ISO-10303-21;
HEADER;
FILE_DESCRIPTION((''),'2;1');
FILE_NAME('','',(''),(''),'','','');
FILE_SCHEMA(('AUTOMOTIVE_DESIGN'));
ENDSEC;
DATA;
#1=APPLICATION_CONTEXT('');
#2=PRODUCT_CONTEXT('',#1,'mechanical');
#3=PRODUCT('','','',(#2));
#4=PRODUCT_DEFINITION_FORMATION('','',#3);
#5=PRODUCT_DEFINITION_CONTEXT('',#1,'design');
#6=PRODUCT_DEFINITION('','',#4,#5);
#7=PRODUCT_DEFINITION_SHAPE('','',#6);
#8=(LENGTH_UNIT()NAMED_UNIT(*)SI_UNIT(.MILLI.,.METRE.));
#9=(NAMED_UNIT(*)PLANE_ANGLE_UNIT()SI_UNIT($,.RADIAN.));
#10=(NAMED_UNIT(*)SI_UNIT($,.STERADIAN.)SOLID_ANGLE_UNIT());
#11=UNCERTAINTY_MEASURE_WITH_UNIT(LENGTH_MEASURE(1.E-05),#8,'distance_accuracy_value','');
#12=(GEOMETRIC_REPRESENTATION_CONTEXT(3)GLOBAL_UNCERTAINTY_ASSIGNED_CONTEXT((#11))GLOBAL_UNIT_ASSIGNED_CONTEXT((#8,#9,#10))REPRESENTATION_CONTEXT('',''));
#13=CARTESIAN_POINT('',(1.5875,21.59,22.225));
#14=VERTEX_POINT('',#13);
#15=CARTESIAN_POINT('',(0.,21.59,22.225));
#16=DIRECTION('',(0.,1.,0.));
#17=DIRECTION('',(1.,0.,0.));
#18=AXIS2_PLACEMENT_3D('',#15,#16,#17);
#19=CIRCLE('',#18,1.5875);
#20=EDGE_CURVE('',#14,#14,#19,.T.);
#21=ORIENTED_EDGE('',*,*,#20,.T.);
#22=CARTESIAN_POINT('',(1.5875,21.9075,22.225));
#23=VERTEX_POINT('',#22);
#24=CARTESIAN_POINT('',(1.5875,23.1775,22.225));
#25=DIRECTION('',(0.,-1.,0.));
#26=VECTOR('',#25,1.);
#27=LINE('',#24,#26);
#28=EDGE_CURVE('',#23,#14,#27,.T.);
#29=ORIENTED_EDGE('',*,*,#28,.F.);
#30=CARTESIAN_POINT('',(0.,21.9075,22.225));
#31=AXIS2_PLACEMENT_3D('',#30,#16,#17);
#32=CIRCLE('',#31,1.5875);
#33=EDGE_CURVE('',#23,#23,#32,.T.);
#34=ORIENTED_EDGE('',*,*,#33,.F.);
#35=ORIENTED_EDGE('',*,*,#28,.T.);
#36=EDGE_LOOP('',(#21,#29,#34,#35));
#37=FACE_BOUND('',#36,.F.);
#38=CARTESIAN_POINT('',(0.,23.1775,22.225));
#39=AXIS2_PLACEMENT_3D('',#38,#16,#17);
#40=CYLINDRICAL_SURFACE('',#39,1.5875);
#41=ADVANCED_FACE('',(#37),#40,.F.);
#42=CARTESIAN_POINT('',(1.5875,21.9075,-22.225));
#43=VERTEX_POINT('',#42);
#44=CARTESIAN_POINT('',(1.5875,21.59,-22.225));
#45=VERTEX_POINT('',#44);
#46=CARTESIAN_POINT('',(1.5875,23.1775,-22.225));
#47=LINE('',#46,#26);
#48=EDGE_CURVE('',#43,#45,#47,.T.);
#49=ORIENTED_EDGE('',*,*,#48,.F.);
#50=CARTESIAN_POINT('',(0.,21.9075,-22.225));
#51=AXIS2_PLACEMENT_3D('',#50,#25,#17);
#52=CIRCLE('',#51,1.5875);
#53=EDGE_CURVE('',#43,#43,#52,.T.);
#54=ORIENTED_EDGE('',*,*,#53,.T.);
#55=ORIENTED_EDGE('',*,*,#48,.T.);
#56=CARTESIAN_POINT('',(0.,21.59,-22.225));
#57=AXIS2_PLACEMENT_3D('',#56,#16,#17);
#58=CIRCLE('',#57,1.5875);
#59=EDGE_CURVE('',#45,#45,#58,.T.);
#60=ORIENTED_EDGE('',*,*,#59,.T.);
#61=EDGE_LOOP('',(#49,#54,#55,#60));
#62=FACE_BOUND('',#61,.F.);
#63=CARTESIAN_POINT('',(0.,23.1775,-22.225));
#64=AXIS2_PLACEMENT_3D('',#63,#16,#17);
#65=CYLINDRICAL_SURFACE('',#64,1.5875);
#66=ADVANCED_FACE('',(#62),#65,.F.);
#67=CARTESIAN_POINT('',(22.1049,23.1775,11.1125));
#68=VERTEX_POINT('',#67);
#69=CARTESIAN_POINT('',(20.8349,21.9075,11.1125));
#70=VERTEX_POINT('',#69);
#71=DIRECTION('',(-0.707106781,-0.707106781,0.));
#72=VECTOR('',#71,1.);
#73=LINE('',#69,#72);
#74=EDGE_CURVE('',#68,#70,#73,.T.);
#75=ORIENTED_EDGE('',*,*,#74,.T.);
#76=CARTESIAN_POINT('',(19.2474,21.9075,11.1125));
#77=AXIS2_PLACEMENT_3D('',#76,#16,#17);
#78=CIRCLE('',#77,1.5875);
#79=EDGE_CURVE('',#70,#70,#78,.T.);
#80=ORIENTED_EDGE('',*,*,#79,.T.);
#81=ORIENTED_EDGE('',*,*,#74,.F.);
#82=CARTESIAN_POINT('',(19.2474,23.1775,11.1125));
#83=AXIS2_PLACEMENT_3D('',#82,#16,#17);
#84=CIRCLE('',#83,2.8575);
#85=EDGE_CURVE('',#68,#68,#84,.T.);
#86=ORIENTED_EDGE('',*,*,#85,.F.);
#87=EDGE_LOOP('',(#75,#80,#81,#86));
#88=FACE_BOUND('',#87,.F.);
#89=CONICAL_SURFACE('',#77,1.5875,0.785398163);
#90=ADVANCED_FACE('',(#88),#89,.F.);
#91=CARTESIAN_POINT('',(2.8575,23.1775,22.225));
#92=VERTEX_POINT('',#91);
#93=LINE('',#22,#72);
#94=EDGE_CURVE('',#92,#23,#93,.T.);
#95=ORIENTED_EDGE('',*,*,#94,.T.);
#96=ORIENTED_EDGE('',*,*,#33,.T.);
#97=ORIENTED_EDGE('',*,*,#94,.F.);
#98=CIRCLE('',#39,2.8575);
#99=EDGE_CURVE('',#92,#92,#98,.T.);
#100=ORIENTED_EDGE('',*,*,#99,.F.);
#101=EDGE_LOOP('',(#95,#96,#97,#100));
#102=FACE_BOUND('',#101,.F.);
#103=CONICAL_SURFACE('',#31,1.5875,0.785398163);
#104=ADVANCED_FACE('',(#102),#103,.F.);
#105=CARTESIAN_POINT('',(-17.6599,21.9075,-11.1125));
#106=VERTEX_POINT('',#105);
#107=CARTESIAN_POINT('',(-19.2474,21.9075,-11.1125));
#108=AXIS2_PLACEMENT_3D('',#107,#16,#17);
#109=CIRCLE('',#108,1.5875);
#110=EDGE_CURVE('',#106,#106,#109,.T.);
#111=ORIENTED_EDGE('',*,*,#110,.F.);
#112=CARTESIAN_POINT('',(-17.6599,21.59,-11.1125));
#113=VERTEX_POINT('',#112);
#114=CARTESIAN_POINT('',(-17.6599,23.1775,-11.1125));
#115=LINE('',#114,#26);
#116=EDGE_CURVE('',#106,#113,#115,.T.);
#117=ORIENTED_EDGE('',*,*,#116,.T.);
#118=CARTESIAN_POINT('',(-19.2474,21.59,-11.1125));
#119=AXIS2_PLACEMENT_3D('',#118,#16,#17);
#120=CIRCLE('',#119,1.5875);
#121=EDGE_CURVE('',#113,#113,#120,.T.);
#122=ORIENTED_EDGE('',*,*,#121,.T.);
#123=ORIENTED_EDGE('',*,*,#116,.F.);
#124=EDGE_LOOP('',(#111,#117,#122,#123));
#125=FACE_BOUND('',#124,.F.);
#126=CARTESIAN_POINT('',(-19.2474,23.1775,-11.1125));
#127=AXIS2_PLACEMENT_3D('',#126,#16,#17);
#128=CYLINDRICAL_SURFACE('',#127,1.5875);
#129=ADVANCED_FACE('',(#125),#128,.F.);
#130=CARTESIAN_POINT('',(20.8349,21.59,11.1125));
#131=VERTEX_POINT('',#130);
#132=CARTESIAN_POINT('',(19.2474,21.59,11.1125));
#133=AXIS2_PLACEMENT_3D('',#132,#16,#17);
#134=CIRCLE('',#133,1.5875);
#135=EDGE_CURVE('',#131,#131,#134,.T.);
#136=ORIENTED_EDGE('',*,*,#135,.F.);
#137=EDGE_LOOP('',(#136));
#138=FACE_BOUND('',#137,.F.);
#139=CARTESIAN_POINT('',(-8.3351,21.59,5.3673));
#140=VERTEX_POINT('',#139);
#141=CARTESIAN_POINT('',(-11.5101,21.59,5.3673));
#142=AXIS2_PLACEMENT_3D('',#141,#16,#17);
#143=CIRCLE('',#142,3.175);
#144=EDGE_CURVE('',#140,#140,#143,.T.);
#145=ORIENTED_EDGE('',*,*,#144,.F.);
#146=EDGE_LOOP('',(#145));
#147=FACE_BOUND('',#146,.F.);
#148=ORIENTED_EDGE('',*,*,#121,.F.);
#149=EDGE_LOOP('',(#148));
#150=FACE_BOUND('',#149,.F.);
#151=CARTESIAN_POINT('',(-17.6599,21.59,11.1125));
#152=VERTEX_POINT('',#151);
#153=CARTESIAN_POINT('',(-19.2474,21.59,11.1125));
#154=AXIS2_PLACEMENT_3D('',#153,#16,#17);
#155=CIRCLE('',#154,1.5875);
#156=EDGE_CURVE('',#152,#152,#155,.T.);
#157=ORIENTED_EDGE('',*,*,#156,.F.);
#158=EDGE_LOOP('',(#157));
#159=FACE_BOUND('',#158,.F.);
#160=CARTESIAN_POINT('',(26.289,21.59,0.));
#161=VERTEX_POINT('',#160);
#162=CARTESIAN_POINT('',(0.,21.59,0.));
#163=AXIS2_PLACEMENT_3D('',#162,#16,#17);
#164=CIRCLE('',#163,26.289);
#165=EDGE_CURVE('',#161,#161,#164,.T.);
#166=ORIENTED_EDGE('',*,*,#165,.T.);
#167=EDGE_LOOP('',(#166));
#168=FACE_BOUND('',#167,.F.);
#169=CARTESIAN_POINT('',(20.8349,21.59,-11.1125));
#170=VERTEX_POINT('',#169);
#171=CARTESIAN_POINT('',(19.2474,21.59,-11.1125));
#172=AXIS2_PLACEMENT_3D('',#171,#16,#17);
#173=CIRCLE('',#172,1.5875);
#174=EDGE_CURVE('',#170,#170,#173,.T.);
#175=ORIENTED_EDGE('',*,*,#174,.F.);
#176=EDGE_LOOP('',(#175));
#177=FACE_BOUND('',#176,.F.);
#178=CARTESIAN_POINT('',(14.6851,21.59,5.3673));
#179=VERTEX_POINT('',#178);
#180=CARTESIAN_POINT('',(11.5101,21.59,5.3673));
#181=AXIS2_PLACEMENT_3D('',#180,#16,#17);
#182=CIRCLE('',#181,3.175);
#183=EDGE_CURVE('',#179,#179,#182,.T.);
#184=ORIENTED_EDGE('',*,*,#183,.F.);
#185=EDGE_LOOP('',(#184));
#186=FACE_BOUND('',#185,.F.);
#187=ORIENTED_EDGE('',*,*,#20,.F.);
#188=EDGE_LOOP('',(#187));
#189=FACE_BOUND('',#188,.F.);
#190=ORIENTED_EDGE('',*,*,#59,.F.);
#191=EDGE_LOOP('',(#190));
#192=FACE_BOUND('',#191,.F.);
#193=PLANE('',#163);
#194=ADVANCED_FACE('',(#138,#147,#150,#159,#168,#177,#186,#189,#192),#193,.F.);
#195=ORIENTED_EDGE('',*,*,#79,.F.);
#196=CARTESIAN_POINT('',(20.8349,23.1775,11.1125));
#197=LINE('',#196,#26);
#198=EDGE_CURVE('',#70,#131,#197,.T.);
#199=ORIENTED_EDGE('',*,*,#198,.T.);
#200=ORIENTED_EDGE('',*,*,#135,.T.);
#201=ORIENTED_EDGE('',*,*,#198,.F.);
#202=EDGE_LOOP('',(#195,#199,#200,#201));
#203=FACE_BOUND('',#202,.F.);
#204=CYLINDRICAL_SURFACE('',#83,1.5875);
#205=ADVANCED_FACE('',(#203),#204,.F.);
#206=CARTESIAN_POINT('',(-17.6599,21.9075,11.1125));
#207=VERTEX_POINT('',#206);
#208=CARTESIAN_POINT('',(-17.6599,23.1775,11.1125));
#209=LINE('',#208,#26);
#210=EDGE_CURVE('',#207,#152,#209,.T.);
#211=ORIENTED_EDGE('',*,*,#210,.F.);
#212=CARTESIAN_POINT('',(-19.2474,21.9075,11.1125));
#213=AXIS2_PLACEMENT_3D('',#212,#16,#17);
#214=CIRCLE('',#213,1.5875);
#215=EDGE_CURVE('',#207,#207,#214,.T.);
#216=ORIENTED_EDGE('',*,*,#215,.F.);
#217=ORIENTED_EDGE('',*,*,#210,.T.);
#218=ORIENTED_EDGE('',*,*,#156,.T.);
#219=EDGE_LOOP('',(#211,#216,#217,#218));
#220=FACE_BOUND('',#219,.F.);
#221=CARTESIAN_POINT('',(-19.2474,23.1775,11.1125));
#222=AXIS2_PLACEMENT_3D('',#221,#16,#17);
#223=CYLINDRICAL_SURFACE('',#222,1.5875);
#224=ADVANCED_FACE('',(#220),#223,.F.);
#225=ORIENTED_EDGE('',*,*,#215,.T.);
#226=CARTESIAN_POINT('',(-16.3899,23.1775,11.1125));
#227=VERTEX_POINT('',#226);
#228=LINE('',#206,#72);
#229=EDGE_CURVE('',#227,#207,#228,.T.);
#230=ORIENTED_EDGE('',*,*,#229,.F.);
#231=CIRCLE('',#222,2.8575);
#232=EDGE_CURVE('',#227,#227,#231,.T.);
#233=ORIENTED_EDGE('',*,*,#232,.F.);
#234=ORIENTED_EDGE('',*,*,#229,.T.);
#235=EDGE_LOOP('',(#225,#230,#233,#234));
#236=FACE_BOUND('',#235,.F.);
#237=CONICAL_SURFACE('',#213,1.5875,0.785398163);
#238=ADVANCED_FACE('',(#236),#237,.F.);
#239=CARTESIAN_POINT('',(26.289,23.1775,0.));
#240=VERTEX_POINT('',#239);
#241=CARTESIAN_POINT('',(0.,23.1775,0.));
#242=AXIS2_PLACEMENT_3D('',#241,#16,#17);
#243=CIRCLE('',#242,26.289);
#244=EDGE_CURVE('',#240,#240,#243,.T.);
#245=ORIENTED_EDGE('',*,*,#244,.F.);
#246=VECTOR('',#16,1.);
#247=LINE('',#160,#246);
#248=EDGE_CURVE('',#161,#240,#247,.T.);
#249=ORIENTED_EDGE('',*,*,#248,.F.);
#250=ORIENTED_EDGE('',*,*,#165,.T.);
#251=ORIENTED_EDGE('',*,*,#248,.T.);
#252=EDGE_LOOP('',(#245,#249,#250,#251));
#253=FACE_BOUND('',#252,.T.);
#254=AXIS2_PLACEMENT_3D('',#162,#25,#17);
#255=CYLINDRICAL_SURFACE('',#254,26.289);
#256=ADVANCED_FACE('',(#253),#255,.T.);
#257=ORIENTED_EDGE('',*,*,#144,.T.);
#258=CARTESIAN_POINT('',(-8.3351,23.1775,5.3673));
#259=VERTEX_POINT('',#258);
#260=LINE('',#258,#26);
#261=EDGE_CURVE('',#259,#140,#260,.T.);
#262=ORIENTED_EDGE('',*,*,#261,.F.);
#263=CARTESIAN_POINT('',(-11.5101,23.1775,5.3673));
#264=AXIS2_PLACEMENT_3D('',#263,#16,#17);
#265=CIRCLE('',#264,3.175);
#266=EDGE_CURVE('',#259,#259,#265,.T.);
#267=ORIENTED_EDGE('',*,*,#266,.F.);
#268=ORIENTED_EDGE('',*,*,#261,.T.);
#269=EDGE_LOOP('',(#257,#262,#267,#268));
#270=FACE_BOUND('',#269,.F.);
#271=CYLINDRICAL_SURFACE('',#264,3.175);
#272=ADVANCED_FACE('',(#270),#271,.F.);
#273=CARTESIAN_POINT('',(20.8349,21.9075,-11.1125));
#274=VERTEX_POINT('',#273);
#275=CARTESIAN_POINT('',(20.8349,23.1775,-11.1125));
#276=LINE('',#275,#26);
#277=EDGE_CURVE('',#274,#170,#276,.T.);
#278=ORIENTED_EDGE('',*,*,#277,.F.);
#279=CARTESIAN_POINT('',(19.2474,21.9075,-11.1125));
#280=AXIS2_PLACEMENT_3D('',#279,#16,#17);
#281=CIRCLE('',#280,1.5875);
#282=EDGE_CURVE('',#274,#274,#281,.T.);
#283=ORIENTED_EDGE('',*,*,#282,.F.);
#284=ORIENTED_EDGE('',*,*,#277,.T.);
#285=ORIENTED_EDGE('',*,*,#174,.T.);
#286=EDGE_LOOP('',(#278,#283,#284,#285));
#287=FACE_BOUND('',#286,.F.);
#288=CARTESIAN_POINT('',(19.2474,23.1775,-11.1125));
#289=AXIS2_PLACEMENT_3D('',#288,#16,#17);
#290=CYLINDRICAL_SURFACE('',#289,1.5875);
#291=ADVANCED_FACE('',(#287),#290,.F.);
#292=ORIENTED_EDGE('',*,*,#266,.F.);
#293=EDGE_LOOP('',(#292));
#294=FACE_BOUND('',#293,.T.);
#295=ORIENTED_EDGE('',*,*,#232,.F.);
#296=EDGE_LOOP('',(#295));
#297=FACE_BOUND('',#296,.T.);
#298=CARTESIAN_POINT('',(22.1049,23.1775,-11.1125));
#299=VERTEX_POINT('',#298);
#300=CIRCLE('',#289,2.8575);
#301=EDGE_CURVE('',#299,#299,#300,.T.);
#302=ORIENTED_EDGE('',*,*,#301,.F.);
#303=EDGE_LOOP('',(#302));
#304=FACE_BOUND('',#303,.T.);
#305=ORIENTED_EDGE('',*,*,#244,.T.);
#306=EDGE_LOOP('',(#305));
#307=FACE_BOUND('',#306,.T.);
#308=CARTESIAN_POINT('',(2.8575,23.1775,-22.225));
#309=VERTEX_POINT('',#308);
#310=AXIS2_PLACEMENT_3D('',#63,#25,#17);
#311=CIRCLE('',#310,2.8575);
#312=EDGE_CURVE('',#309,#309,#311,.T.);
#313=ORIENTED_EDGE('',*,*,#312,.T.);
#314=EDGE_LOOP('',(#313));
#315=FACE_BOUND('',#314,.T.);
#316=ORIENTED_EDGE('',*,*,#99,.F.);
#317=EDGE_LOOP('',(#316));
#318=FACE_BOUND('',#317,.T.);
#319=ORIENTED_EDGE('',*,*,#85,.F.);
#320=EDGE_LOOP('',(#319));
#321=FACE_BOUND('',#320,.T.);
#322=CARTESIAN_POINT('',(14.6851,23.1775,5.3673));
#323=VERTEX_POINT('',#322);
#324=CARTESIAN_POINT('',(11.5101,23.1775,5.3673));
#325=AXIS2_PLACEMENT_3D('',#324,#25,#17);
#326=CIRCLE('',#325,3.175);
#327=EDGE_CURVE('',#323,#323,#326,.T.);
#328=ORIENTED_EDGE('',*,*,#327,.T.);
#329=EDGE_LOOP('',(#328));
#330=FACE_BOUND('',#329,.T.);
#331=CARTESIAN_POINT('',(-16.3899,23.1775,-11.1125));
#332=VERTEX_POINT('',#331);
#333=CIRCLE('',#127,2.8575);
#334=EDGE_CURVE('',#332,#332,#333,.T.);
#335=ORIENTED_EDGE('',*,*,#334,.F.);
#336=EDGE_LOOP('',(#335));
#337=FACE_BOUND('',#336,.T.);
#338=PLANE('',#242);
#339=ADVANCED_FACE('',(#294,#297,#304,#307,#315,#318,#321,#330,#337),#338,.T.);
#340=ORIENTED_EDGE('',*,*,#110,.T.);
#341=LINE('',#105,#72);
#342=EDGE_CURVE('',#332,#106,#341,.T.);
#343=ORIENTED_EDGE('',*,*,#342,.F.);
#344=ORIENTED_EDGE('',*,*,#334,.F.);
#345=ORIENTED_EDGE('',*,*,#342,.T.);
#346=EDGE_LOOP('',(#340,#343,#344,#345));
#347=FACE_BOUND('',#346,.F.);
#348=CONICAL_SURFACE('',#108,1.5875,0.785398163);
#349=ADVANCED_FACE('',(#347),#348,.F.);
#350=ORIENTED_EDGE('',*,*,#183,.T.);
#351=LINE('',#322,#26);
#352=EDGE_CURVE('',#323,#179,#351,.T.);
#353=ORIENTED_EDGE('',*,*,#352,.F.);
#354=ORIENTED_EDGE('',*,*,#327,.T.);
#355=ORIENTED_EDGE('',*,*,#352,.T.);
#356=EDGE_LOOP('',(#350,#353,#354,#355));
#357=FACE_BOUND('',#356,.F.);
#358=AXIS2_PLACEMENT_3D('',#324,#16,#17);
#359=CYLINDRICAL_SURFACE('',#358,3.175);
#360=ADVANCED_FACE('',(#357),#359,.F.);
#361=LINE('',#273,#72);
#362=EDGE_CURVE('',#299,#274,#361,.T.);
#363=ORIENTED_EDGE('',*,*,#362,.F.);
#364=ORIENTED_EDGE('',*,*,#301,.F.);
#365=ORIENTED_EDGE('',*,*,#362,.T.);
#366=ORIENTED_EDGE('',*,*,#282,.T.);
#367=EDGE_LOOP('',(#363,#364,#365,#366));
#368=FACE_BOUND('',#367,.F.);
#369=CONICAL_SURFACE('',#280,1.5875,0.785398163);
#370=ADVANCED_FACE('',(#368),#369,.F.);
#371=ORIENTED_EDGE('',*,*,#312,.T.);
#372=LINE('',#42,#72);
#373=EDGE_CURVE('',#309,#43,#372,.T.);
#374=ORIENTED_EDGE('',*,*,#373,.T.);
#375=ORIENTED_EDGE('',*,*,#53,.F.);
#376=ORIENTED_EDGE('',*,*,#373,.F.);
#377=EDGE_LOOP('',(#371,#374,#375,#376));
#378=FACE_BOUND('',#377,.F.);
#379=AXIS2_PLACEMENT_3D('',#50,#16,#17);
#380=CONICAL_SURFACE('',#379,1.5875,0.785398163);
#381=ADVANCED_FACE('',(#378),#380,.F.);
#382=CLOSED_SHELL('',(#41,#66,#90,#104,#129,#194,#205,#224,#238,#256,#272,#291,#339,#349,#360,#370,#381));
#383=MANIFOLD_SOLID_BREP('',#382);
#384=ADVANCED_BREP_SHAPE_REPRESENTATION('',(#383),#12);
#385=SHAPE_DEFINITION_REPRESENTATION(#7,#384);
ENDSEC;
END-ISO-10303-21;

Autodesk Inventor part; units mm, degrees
ref_plane "YZ Plane" through (0, 0, 0) normal (1, 0, 0) x (0, 1, 0)
ref_plane "XZ Plane" through (0, 0, 0) normal (0, 1, 0) x (-1, 0, 0)
sketch "Sketch6" plane through (0, 0, 0) normal (0, 0, 1) x (1, 0, 0)
  line L0 (540.6478, 1219.1491) -> (540.6478, -58.7076) construction
  line L1 (540.6478, -58.7076) -> (-407.4394, -58.7076) construction
  line L2 (-407.4394, -58.7076) -> (-407.4394, 1219.1491) construction
  line L3 (-407.4394, 1219.1491) -> (540.6478, 1219.1491) construction
  point P0 (0, 0)
sketch "Sketch5" plane through (0, 0, 0) normal (0, 0, 1) x (1, 0, 0)
  line L0 (0, 0) -> (0, 142.24)
  line L1 (0, 142.24) -> (50.8, 142.24)
  line L2 (50.8, 142.24) -> (-50.8, 142.24)
  line L3 (50.8, 142.24) -> (45.2986, 0) construction
  line L4 (45.2986, 0) -> (0, 0) construction
  spline S0 degree 2 poles (50.8, 142.24) (45.2986, 0) (0, 0) knots 1 1 1 2 2 2
  line L5 (-50.8, 142.24) -> (-45.2986, 0) construction
  line L6 (-45.2986, 0) -> (0, 0) construction
  spline S1 degree 2 poles (-50.8, 142.24) (-45.2986, 0) (0, 0) knots 1 1 1 2 2 2
  dimension "d20" = 142.24
  dimension "d21" = 50.8
  dimension "d22" = 101.6
revolve "Revolution1" add sketch "Sketch5" angle 360 about axis through (0, 0, 0) along (0, 1, 0) contours L0 L1 S0
ref_plane "Work Plane1" through (0, 21.59, 0) normal (0, 1, 0) x (1, 0, 0)
sketch "Sketch9" plane through (0, 21.59, 0) normal (0, 1, 0) x (1, 0, 0)
  line L0 (-101.4531, 67.0538) -> (104.6936, 67.0538)
  line L1 (104.6936, 67.0538) -> (104.6936, -70.5436)
  line L2 (104.6936, -70.5436) -> (-101.4531, -70.5436)
  line L3 (-101.4531, -70.5436) -> (-101.4531, 67.0538)
  point P0 (0, 0)
extrude "Extrusion2" cut sketch "Sketch9" along normal through all
sketch "Sketch10" plane through (0, 21.59, 0) normal (0, 1, 0) x (1, 0, 0)
  circle A0 centre (0, 0) radius 29.2557
  circle A1 centre (0, 0) radius 26.289
  dimension "d75" = 58.5114
  dimension "d76" = 52.578
extrude "Extrusion3" add sketch "Sketch10" along normal blind 1.5875 contours A1
extrude "Extrusion4" cut sketch "Sketch10" against normal through all contours A0 | A1
sketch "Sketch11" plane through (0, 23.1775, 0) normal (0, 1, 0) x (1, 0, 0)
  line L0 (0, 0) -> (0, 22.225)
  circle A0 centre (0, 22.225) radius 1.5875
  circle A1 centre (-19.2474, 11.1125) radius 1.5875
  circle A2 centre (-19.2474, -11.1125) radius 1.5875
  circle A3 centre (0, -22.225) radius 1.5875
  circle A4 centre (19.2474, -11.1125) radius 1.5875
  circle A5 centre (19.2474, 11.1125) radius 1.5875
  dimension "d81" = 22.225
  dimension "d82" = 3.175
  dimension "d85" = 360
extrude "Extrusion5" cut sketch "Sketch11" against normal blind 1.5875
chamfer "Chamfer1" distance 1.27 angle 45 6 edges at (17.6599, 23.1775, 11.1125) (17.6599, 23.1775, -11.1125) (-1.5875, 23.1775, -22.225) (-20.8349, 23.1775, -11.1125) (-20.8349, 23.1775, 11.1125) (-1.5875, 23.1775, 22.225)
sketch "Sketch12" plane through (0, 23.1775, 0) normal (0, 1, 0) x (1, 0, 0)
  line L0 (0, 0) -> (11.5101, -5.3673)
  line L1 (0, 0) -> (12.7, 0) construction
  circle A0 centre (11.5101, -5.3673) radius 3.175
  circle A1 centre (-11.5101, -5.3673) radius 3.175
  line L2 (0, 0) -> (-11.5101, -5.3673) construction
  dimension "d92" = 12.7
  dimension "d93" = 25
  dimension "d94" = 6.35
  dimension "d95" = 6.35
extrude "Extrusion6" cut sketch "Sketch12" against normal through all
properties part number "foreHullInsert"
